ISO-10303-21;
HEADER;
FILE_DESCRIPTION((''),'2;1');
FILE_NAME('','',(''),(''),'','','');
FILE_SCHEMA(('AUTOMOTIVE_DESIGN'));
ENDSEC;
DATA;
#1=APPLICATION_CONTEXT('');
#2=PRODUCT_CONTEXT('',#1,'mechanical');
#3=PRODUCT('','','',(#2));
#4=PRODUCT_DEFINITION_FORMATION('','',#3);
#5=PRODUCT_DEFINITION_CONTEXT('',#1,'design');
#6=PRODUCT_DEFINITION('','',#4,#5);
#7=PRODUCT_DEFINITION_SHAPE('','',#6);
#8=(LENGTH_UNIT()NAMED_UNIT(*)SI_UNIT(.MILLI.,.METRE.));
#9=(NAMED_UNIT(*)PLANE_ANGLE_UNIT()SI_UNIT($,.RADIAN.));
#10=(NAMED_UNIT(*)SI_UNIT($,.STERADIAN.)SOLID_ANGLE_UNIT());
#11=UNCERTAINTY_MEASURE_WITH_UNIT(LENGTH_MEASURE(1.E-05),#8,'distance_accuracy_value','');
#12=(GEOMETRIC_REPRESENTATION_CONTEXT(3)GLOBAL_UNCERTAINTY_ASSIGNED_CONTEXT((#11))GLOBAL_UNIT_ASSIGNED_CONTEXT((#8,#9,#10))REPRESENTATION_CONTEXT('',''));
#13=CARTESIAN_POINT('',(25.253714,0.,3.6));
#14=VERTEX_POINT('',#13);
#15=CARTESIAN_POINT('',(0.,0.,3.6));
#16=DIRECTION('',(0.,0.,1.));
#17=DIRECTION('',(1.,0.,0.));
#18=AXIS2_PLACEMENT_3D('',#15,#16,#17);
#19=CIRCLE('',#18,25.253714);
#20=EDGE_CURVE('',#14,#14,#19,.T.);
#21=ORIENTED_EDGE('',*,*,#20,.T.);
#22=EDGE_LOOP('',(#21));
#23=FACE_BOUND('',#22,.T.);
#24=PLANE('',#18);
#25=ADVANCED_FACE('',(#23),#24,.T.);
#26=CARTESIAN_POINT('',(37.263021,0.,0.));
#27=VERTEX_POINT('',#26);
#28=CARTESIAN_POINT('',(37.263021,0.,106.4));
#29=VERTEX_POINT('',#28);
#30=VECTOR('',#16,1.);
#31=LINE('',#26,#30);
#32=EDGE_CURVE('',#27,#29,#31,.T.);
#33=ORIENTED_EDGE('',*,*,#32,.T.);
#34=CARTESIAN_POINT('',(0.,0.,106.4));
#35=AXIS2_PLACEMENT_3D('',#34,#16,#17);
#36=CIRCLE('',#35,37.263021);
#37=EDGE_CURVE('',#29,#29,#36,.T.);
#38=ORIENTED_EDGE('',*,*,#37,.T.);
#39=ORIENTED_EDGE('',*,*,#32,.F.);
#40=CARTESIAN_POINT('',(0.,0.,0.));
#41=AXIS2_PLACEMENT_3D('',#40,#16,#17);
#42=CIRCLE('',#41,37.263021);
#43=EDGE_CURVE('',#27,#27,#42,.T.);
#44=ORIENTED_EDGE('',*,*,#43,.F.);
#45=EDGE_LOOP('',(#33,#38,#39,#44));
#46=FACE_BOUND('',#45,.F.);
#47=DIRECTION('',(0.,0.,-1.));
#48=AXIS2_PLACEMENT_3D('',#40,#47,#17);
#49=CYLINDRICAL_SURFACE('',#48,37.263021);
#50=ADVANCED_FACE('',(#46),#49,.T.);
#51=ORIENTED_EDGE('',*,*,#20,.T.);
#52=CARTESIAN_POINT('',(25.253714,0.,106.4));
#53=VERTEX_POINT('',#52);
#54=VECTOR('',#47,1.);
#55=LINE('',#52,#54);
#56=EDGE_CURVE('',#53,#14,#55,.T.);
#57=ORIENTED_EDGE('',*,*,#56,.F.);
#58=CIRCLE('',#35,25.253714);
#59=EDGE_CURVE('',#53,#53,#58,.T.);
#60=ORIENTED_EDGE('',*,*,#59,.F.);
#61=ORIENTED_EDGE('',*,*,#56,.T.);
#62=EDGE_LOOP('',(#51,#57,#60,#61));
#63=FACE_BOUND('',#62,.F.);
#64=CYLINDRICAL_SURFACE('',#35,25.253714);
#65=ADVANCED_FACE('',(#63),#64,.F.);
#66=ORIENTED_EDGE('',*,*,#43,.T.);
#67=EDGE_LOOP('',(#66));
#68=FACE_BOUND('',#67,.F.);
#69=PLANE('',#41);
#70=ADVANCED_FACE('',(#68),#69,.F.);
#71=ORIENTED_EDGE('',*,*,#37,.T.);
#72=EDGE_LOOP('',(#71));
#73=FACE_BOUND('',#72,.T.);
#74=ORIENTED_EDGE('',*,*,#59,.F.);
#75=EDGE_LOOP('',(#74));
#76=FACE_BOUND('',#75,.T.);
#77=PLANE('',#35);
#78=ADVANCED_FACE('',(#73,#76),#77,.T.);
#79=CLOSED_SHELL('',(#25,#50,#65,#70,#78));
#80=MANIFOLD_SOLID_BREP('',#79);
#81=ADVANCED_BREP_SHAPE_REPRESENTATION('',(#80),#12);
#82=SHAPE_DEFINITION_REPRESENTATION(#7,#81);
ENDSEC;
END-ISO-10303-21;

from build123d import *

# Parameters (mm, degrees)
F0_R     = 37.2630205799
F1_DEPTH = 106.4
F3_DEPTH = 86.5
F5_R     = 25.2537141006
F6_DEPTH = 102.8


# Not quite as in the source:
# - a feature names something its author has since deleted; it is built from what else it names


with BuildPart() as f1:
    # F0 (on Top) → F1 (new body)
    with BuildSketch(Plane.XY):
        Circle(F0_R)
    extrude(amount=F1_DEPTH)

    # F2 (on face) → F3 (join)
    with BuildSketch(Plane.XY.offset(106.4)):
        Polygon((4.5720788687, -32.5187220476), (30.4480788261, -12.2998245754), (25.8759999575, 20.2188974722), (-4.5720788687, 32.5187220476), (-30.4480788261, 12.2998245754), (-25.8759999575, -20.2188974722), align=None)
    extrude(amount=-F3_DEPTH)

    # F5 (on face) → F6 (cut)
    with BuildSketch(Plane.XY.offset(106.4)):
        Circle(F5_R)
    extrude(amount=-F6_DEPTH, mode=Mode.SUBTRACT)


solid = f1.part
